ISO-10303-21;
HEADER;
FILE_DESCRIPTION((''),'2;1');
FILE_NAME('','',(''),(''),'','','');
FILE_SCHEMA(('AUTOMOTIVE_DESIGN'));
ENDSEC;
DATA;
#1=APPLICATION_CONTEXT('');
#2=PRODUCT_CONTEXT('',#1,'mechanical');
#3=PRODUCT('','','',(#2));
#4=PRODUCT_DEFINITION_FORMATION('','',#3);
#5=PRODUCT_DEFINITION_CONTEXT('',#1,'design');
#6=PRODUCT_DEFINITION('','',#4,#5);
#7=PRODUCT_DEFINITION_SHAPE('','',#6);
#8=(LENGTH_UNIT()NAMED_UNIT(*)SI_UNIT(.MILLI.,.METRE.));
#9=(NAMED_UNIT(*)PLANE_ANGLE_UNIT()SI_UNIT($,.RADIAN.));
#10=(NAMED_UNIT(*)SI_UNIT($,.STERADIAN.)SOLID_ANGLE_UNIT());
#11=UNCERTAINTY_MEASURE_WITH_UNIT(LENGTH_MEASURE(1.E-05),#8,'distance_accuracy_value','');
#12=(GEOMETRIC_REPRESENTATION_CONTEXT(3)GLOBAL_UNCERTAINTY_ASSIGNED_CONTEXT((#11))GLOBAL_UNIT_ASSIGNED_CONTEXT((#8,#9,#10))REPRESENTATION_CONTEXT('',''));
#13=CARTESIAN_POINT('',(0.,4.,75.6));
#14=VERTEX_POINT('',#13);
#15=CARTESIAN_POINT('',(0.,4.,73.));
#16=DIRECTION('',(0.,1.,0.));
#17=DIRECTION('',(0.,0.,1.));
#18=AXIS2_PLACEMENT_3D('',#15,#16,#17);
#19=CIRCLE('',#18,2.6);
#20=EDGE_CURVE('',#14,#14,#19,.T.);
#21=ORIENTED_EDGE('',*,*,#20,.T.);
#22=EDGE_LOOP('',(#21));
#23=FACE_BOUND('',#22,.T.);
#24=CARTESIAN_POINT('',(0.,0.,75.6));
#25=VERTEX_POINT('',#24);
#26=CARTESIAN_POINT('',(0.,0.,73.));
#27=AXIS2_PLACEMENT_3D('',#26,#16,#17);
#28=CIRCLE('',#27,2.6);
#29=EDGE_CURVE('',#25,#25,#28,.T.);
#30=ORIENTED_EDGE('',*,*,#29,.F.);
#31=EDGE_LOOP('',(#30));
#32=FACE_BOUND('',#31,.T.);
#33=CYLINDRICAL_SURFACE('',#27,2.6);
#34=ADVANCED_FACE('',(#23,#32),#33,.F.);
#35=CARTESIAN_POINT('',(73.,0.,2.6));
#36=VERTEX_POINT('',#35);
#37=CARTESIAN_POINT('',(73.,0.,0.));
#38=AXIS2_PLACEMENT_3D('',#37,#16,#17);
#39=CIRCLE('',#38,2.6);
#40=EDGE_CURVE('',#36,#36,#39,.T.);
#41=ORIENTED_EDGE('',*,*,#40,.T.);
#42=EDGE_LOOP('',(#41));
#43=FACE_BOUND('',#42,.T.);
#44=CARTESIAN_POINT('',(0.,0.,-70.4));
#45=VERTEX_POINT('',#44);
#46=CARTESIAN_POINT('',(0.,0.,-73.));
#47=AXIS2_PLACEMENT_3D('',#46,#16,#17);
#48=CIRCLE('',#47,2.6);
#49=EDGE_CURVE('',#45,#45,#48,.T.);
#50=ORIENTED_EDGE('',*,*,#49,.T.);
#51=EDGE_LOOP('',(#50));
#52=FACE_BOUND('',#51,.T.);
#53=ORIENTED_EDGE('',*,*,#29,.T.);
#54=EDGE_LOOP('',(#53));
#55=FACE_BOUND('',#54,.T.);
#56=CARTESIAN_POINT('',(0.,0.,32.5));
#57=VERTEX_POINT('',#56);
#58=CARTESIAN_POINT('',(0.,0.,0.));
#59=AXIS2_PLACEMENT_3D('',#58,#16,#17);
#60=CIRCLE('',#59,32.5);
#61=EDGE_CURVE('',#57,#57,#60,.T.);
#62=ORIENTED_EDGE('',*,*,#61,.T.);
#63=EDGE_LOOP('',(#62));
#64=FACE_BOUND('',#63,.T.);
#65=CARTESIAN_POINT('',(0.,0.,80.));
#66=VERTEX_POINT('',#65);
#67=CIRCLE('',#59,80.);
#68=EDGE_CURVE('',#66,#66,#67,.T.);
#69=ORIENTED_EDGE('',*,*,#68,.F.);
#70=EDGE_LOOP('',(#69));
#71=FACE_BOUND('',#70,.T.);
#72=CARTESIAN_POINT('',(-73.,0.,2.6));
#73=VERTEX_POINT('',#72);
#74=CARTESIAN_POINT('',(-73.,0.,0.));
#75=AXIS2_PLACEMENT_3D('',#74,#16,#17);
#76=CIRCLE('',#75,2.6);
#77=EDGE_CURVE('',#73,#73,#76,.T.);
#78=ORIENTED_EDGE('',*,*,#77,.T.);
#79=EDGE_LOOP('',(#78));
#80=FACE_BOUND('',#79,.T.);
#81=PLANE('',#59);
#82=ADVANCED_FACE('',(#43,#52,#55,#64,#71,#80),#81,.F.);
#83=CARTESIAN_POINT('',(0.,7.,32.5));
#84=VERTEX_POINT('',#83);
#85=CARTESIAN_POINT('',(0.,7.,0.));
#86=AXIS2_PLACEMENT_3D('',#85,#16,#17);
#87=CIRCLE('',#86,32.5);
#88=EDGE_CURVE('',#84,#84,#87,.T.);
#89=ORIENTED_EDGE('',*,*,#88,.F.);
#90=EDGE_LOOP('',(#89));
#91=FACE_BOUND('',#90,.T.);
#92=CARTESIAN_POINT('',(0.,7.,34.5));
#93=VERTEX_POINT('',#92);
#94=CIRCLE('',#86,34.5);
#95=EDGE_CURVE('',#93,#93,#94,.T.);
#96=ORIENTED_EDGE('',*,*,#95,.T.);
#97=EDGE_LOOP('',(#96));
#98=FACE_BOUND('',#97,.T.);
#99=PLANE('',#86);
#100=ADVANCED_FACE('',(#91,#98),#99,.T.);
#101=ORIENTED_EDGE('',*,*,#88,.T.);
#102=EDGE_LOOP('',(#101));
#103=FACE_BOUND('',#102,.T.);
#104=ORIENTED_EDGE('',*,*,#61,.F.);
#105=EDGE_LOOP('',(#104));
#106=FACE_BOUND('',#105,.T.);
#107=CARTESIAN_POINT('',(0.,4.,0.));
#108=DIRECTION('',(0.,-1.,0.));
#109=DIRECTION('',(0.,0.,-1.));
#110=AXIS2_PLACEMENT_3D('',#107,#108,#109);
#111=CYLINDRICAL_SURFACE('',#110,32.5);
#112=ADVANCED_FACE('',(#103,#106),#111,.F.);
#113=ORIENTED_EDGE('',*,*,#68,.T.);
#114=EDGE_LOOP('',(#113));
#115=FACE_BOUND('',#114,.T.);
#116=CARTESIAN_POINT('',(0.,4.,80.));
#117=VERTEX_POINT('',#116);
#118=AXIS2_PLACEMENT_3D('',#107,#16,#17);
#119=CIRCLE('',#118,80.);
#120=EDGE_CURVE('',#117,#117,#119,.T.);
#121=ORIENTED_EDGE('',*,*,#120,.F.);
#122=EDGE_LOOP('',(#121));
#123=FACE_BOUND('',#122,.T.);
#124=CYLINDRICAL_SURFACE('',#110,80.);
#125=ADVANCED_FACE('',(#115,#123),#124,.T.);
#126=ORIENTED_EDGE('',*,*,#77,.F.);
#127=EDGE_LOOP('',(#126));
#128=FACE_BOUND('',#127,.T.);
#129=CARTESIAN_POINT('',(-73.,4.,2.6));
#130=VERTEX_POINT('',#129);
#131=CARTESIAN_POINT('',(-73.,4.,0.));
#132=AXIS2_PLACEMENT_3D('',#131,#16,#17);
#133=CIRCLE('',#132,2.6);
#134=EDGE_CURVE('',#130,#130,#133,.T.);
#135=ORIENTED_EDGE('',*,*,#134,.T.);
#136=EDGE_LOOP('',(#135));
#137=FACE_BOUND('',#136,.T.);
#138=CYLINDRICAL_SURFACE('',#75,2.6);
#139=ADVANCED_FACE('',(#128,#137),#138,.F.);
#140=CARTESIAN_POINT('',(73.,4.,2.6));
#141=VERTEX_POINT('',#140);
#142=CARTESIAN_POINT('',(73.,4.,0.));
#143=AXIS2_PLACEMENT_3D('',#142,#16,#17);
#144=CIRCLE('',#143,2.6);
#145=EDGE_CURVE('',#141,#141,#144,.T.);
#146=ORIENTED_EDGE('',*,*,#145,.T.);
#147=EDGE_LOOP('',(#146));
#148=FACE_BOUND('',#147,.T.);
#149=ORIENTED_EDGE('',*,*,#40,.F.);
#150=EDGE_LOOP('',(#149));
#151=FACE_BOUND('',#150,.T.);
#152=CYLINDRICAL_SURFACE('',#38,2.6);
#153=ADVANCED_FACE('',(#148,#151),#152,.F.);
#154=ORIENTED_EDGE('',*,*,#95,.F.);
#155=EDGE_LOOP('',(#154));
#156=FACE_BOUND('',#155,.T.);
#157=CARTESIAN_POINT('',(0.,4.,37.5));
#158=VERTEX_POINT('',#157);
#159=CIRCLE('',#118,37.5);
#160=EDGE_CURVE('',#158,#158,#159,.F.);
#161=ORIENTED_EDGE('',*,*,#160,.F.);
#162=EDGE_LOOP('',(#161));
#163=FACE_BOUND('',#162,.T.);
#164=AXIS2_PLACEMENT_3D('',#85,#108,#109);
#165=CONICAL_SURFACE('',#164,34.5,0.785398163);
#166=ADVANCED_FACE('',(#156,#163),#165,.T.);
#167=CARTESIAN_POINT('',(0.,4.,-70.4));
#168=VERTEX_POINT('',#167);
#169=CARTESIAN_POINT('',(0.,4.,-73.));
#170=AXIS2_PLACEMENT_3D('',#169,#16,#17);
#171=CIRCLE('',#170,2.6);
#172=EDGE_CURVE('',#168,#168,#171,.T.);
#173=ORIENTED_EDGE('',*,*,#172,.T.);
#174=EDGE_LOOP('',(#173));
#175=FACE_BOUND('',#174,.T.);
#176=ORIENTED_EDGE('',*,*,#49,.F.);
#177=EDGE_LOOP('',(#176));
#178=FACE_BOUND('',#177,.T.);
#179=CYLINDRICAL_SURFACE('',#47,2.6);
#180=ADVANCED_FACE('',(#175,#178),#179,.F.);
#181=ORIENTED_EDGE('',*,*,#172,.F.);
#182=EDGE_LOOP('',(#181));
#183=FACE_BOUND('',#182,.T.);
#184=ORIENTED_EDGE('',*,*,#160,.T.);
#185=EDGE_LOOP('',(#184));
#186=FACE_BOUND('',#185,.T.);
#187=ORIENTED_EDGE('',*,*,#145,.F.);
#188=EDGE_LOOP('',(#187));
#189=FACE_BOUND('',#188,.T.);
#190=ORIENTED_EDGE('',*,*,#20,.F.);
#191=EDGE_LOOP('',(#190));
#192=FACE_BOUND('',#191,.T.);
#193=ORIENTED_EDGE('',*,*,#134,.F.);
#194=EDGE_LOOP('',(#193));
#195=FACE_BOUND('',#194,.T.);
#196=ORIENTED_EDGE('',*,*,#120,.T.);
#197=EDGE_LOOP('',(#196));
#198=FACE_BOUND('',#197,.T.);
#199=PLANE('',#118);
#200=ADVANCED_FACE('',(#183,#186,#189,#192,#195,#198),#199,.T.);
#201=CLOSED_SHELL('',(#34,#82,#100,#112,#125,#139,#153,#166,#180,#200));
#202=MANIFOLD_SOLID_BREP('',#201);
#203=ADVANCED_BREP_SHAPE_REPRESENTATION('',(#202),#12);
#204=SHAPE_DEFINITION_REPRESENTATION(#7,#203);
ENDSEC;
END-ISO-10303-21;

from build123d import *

# Parameters (mm, degrees)
SKETCH1_R           = 80
SKETCH1_R_2         = 32.5
BOSS_EXTRUDE1_DEPTH = 4
SKETCH2_R           = 2.6
CUT_EXTRUDE1_DEPTH  = 114.207773585
SKETCH3_R           = 34.5
SKETCH3_R_2         = 32.5
BOSS_EXTRUDE2_DEPTH = 3
CHAMFER1_SIZE       = 3


with BuildPart() as part:
    # Sketch1 → Boss-Extrude1 (new body)
    with BuildSketch(Plane(origin=(0, 0, 0), x_dir=(1, 0, 0), z_dir=(0, 1, 0))):
        with Locations(Location((0, 0, 0), (0, 0, 270))):
            Circle(SKETCH1_R)
        with Locations(Location((0, 0, 0), (0, 0, 270))):
            Circle(SKETCH1_R_2, mode=Mode.SUBTRACT)
    extrude(amount=BOSS_EXTRUDE1_DEPTH)

    # Sketch2 → Cut-Extrude1 (cut, through all)
    with BuildSketch(Plane(origin=(0, 4, 0), x_dir=(1, 0, 0), z_dir=(0, 1, 0))):
        with Locations(Location((0, 73, 0), (0, 0, 270))):
            Circle(SKETCH2_R)
        with Locations(Location((73, 0, 0), (0, 0, 270))):
            Circle(SKETCH2_R)
        with Locations(Location((0, -73, 0), (0, 0, 270))):
            Circle(SKETCH2_R)
        with Locations(Location((-73, 0, 0), (0, 0, 270))):
            Circle(SKETCH2_R)
    extrude(amount=-CUT_EXTRUDE1_DEPTH, mode=Mode.SUBTRACT)

    # Sketch3 → Boss-Extrude2 (add)
    with BuildSketch(Plane(origin=(0, 4, 0), x_dir=(1, 0, 0), z_dir=(0, 1, 0))):
        with Locations(Location((0, 0, 0), (0, 0, 270))):
            Circle(SKETCH3_R)
        with Locations(Location((0, 0, 0), (0, 0, 270))):
            Circle(SKETCH3_R_2, mode=Mode.SUBTRACT)
    extrude(amount=BOSS_EXTRUDE2_DEPTH)

    # Chamfer1
    chamfer1_edges = [part.edges().sort_by_distance(p)[0] for p in [
        (0, 4, -34.5),
    ]]
    chamfer(chamfer1_edges, length=CHAMFER1_SIZE - 0.0001)  # a hair under: the kernel refuses the full size


solid = part.part
